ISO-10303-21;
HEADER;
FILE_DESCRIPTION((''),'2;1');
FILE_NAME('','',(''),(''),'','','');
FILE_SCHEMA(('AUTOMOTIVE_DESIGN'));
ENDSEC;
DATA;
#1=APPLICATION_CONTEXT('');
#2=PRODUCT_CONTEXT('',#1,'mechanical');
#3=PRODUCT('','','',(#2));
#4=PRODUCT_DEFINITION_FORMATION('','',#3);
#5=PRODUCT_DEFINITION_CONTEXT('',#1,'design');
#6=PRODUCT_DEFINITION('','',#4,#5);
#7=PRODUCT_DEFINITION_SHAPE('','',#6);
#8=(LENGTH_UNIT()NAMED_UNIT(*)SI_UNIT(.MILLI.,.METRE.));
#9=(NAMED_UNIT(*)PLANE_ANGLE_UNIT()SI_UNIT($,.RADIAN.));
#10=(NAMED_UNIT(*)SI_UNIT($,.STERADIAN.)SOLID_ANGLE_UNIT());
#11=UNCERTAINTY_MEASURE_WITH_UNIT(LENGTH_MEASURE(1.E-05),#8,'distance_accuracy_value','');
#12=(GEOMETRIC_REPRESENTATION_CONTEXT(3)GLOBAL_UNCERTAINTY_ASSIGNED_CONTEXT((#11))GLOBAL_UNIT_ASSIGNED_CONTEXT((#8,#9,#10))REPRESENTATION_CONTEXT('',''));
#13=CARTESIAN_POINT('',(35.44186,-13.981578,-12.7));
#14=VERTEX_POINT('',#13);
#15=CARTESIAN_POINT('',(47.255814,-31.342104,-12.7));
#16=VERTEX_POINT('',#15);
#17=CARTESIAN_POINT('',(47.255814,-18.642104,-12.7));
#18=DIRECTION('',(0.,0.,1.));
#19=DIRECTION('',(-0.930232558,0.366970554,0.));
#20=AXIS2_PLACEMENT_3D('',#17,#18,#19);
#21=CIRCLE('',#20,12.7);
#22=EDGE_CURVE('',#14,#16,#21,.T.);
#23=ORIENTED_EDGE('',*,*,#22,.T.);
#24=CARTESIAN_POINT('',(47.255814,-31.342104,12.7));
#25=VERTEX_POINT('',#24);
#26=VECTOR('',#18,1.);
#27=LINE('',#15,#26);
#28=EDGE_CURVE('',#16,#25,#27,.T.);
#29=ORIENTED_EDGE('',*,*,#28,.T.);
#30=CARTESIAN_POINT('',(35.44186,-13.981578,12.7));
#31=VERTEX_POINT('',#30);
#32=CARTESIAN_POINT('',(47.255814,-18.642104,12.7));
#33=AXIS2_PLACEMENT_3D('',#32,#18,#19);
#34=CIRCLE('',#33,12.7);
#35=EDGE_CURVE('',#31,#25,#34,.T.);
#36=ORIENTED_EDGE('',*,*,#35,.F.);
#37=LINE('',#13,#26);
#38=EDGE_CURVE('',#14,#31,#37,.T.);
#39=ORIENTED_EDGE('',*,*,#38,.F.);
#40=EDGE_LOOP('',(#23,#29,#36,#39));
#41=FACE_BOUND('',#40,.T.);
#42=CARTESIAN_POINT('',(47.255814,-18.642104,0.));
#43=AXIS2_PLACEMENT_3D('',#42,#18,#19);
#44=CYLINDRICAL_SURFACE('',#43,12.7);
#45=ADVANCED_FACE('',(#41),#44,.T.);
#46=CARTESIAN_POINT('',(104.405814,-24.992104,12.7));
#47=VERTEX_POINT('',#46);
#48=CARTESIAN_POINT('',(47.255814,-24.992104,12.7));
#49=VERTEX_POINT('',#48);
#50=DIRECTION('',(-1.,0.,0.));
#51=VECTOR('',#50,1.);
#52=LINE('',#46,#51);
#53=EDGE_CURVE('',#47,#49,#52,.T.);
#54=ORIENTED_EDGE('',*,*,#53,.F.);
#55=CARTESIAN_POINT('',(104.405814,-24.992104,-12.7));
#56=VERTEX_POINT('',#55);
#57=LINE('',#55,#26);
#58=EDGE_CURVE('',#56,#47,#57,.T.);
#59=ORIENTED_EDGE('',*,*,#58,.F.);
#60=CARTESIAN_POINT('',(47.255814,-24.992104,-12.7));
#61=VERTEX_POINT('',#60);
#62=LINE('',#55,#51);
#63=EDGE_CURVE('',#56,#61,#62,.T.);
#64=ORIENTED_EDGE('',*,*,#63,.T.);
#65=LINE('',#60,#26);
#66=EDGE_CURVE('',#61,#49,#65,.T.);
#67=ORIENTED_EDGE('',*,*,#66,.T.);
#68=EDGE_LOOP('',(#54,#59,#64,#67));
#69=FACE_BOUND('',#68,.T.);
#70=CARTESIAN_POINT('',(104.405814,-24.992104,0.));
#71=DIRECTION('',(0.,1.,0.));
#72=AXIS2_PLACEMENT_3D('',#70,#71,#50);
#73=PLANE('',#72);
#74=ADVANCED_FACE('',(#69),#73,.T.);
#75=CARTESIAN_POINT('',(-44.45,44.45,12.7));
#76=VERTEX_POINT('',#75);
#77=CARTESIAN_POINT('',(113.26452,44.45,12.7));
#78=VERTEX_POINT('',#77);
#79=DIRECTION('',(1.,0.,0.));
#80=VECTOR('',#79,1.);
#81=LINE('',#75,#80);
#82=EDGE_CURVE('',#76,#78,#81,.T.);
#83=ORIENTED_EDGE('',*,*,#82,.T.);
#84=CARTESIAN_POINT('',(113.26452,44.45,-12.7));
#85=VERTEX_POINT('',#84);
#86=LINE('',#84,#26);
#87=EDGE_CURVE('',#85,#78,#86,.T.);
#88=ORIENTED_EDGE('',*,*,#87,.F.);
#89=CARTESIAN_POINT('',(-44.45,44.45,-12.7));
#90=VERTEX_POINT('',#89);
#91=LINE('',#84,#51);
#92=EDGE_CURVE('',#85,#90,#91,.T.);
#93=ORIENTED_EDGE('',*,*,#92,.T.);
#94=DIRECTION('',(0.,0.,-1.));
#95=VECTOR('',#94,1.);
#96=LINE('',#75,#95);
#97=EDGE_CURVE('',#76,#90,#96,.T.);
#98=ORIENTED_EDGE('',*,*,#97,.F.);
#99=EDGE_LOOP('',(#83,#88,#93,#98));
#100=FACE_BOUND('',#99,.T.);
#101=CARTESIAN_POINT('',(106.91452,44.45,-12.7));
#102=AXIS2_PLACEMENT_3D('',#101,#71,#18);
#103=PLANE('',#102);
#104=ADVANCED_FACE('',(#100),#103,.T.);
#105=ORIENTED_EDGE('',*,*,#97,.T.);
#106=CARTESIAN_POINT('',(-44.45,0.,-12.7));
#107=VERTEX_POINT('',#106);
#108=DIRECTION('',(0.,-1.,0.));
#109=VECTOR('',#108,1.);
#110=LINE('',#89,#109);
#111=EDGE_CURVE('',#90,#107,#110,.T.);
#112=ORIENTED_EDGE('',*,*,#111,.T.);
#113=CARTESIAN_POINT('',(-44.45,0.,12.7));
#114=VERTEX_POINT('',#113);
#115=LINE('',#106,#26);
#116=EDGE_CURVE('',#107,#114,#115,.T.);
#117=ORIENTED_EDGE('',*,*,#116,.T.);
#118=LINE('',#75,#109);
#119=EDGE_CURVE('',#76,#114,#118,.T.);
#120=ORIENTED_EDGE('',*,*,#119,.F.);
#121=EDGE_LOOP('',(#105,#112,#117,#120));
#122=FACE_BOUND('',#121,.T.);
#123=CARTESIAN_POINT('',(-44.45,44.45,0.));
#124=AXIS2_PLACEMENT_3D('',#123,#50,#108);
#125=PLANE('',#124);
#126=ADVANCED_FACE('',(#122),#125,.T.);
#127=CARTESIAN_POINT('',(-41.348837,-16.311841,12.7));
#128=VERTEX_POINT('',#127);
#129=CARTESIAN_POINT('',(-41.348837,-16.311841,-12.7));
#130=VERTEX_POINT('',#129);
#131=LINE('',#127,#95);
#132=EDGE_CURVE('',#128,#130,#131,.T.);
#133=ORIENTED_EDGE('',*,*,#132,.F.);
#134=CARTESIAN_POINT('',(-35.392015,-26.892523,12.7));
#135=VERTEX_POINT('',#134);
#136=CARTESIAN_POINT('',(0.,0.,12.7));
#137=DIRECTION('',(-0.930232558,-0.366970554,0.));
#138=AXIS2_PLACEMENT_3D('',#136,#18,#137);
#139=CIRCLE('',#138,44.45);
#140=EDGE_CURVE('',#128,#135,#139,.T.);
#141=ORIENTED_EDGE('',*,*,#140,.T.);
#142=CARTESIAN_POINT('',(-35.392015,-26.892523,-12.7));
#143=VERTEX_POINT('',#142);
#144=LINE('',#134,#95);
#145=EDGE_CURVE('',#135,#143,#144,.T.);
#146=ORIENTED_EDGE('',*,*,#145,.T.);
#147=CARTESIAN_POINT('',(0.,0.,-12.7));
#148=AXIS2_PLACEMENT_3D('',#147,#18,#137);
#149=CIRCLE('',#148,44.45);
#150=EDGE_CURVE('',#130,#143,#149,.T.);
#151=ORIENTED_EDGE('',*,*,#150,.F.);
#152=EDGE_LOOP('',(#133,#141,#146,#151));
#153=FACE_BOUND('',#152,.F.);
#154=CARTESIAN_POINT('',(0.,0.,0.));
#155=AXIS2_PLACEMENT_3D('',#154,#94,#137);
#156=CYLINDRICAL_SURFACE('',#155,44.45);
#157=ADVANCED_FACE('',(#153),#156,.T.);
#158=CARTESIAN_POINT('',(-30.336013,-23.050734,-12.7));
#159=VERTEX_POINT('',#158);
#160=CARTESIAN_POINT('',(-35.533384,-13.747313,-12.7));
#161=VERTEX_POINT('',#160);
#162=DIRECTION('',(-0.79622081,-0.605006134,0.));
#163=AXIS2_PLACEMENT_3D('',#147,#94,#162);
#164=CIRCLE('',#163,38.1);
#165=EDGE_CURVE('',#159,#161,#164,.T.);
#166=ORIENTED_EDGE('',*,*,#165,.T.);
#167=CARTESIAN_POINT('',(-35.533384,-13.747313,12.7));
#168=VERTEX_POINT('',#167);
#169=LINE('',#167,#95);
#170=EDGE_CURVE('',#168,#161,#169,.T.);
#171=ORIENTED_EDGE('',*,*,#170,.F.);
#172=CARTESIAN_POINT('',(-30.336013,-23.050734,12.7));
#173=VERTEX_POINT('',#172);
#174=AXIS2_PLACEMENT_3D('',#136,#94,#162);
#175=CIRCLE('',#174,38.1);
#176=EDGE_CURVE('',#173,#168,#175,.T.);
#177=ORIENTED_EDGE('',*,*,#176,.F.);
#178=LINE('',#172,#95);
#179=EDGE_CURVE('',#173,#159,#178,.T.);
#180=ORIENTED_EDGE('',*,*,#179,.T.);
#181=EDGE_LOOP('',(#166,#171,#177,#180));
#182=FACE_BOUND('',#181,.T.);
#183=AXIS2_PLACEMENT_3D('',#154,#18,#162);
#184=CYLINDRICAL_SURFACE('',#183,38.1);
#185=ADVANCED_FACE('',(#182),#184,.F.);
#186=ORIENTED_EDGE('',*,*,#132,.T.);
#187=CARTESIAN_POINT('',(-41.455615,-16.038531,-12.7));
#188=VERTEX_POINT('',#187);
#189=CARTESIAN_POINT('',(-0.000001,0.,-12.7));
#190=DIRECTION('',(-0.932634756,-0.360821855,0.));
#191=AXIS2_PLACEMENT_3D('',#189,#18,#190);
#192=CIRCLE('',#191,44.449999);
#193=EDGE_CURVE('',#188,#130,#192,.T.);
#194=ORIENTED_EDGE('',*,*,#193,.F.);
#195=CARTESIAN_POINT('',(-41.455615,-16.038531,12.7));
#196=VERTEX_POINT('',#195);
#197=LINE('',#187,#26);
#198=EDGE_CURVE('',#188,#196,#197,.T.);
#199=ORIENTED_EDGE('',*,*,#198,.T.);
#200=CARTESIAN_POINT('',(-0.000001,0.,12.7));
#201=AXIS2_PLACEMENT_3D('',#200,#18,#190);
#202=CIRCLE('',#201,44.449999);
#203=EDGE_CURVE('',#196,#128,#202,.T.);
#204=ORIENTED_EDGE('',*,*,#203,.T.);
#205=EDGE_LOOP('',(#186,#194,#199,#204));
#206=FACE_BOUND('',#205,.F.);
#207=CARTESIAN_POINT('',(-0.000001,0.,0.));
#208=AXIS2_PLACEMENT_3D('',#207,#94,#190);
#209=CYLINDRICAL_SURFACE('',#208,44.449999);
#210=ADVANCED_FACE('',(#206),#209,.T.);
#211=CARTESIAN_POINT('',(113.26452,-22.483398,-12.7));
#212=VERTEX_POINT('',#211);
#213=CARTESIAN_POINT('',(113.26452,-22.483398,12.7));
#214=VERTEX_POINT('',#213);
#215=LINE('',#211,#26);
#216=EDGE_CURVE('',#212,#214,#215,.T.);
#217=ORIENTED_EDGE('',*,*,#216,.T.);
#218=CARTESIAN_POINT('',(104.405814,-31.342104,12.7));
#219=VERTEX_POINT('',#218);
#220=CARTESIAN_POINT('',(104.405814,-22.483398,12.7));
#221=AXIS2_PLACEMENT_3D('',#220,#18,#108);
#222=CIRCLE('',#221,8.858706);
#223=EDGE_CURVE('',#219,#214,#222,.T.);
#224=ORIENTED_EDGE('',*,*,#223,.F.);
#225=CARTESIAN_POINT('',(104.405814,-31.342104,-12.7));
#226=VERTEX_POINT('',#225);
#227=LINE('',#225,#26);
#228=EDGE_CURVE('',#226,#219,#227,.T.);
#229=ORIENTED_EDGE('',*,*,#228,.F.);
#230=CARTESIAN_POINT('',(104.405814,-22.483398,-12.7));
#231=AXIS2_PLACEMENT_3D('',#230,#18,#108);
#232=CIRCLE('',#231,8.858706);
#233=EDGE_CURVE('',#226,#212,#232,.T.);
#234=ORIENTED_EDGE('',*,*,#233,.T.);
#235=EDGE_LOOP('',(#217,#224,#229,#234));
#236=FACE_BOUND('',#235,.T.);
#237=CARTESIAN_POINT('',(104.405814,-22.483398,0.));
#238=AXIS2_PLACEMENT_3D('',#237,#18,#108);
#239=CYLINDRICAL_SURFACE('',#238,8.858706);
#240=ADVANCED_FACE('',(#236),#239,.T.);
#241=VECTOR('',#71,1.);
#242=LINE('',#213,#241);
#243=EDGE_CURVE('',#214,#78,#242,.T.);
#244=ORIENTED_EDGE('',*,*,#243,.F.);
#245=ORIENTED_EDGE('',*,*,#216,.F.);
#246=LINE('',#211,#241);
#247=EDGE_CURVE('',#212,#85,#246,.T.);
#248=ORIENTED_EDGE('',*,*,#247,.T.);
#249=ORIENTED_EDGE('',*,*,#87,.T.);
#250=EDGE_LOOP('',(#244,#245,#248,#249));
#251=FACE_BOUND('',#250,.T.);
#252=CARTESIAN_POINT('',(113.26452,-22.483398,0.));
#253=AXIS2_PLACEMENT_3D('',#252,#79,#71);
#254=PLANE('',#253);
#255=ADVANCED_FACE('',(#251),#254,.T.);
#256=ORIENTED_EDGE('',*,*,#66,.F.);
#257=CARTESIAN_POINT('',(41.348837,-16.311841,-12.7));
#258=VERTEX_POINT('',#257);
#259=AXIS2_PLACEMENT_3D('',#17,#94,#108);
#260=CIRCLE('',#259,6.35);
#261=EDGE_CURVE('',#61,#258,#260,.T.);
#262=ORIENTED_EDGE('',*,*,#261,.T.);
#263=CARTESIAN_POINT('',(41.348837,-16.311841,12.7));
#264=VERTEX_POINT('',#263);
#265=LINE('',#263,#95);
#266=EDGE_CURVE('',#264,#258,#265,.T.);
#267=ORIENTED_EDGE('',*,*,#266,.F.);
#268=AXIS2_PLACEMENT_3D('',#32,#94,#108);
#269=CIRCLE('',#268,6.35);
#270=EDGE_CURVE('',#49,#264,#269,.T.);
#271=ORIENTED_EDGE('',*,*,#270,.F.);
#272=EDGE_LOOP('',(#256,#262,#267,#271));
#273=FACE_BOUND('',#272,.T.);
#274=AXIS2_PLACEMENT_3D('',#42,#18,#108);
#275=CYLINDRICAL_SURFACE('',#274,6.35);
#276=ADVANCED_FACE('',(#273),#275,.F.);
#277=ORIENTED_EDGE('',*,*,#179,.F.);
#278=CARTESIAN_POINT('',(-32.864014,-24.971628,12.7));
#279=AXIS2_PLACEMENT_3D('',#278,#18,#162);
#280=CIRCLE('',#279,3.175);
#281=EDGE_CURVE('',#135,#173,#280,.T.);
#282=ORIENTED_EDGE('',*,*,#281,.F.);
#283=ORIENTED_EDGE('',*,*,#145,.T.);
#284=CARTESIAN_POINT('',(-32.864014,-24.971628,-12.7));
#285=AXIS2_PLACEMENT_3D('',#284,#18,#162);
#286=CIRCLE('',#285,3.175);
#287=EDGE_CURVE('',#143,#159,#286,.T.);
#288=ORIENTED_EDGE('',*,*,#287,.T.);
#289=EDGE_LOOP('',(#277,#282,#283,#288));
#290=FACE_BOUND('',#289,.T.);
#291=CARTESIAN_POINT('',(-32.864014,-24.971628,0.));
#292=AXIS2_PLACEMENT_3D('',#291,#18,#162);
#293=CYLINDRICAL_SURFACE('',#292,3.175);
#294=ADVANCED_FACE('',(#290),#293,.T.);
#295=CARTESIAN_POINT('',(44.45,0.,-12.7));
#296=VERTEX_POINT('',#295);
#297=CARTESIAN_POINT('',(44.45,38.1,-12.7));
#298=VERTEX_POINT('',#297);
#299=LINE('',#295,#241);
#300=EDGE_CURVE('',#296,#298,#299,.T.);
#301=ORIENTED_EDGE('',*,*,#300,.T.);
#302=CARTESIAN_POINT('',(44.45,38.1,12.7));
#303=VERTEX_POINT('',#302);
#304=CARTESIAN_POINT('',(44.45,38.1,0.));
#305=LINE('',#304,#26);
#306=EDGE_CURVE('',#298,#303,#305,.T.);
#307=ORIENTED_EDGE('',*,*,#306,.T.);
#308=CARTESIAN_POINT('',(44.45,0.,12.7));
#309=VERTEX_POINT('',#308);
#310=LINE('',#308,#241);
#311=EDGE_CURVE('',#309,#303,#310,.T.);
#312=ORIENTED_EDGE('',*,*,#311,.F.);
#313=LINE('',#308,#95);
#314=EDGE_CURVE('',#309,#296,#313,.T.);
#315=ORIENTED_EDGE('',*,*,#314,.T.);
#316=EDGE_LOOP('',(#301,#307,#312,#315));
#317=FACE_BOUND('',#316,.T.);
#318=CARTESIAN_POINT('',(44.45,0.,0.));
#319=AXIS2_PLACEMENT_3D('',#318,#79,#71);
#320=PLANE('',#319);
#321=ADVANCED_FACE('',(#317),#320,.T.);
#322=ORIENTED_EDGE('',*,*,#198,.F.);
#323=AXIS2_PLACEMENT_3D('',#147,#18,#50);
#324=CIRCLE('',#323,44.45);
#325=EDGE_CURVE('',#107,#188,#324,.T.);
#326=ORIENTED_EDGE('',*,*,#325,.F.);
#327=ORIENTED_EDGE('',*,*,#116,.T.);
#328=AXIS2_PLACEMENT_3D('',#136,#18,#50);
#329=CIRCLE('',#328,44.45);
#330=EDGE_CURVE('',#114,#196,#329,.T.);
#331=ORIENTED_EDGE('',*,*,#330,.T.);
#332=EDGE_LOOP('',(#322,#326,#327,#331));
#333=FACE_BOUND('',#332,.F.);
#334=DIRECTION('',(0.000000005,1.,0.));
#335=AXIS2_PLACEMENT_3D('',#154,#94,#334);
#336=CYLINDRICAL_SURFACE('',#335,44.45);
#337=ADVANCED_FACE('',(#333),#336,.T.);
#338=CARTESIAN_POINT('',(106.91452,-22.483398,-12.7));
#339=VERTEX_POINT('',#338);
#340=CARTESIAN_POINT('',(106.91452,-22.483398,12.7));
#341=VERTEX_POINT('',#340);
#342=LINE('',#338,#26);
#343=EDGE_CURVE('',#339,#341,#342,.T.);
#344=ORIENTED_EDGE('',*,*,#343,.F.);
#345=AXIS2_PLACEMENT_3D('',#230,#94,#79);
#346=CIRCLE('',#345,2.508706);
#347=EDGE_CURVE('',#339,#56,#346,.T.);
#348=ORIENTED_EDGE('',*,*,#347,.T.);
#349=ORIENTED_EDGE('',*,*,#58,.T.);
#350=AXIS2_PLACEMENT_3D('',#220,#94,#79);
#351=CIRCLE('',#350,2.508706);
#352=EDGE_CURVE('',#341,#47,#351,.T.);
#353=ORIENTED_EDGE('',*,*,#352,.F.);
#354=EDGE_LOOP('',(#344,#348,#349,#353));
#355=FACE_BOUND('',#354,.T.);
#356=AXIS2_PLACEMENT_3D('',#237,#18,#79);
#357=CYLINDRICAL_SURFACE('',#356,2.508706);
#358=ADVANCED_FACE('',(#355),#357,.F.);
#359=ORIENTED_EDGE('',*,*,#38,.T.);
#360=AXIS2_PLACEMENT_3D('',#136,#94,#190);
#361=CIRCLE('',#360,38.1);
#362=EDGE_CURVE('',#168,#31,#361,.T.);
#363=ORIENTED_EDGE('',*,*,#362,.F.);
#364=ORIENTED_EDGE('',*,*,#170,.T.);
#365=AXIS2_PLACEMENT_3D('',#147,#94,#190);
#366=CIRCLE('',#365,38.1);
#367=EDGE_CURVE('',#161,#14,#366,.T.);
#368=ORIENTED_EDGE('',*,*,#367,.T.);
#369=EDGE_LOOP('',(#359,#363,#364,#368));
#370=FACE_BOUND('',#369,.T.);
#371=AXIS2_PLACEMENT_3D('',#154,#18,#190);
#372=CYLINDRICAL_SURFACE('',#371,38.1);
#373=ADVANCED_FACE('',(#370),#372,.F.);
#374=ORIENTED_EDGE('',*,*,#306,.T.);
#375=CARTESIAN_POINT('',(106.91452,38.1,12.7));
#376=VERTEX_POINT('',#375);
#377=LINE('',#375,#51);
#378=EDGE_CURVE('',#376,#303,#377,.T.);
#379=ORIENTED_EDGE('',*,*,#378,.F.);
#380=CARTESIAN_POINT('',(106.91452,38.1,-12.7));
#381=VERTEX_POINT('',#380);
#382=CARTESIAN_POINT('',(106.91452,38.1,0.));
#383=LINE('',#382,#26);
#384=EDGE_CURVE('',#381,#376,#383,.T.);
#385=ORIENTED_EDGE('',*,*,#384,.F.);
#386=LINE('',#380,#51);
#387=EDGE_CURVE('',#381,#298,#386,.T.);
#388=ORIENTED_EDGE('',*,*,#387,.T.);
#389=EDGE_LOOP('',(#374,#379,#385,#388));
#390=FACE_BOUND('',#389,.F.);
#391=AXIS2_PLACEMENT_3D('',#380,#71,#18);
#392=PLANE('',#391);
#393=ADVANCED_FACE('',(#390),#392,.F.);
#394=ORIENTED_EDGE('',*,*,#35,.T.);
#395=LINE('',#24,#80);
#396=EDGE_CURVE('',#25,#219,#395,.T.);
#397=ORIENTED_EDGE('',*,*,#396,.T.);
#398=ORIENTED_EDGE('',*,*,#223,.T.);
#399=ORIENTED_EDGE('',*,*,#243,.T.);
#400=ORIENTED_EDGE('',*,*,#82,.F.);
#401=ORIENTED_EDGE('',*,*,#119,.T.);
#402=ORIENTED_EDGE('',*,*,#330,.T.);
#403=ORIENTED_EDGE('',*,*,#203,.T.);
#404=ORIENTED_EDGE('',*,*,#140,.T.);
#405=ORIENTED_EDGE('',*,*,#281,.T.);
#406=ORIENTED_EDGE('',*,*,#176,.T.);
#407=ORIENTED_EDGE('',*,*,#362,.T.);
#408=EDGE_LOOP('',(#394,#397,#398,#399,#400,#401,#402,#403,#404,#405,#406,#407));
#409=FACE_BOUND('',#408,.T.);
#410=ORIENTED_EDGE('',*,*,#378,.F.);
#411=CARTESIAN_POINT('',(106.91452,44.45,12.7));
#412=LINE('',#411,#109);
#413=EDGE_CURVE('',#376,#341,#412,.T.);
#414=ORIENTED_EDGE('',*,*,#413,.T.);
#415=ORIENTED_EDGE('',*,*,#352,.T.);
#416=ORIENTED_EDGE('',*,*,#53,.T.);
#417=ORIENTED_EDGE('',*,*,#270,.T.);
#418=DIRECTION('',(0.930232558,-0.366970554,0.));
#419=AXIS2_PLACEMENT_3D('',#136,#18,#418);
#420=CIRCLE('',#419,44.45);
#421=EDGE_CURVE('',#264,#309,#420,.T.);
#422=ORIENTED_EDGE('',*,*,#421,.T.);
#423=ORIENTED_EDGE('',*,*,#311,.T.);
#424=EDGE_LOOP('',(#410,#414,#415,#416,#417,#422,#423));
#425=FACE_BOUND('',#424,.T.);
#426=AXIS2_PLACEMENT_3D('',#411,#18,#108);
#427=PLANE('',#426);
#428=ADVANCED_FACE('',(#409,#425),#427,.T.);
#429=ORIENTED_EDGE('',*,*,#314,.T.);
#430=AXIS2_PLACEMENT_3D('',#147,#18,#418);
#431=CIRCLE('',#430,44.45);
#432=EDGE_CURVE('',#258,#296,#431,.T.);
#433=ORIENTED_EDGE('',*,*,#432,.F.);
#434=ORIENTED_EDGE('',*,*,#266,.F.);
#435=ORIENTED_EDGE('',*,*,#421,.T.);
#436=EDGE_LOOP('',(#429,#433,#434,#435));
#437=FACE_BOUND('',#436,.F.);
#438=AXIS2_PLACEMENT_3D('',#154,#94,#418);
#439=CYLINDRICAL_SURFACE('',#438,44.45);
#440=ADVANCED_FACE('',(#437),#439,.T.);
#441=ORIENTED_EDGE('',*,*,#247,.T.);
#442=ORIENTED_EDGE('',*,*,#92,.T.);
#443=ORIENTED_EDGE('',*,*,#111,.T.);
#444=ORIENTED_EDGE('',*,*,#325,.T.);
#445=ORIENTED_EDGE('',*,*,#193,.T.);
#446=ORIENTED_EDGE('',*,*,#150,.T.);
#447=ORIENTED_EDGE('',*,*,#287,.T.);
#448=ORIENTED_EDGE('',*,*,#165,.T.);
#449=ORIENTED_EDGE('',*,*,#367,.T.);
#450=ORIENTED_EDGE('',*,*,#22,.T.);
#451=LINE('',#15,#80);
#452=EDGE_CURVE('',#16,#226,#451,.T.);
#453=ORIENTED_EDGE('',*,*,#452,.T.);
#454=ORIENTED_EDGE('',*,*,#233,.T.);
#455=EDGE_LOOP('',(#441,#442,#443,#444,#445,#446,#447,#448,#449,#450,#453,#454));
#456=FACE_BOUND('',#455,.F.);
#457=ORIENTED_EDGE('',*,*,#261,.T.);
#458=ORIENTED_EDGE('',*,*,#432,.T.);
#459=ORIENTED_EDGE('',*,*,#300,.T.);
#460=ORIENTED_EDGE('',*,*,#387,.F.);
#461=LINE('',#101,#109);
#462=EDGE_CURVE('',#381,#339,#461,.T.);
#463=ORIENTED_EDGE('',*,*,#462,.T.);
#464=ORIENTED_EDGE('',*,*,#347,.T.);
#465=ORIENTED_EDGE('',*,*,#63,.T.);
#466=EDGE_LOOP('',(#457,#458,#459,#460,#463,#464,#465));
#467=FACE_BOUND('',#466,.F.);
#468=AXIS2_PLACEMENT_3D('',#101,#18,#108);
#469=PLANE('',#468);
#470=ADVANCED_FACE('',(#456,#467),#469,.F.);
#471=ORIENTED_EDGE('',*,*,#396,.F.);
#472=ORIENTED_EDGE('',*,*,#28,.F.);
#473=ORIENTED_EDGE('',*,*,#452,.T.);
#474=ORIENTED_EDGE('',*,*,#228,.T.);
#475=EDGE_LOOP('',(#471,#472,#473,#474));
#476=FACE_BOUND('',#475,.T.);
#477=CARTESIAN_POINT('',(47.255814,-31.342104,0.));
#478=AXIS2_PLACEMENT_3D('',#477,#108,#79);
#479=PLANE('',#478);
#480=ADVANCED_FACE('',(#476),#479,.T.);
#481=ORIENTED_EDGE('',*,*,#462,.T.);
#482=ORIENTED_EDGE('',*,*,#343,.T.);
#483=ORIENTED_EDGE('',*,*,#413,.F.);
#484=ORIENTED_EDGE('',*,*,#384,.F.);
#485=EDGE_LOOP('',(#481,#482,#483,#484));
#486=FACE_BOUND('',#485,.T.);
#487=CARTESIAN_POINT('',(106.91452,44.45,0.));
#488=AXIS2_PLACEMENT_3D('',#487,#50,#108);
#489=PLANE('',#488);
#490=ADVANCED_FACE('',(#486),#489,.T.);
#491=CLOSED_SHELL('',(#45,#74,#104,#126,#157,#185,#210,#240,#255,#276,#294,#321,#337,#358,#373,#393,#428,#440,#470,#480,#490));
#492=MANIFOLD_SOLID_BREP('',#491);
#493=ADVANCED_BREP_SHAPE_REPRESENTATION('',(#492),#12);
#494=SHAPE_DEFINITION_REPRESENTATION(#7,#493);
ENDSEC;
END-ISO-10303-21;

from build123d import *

# Parameters (mm, degrees)
F1_DEPTH = 12.7
F2_DEPTH = 12.7
F3_DEPTH = 12.7
F4_W     = 6.35
F4_H     = 25.4
F5_DEPTH = 62.464519896


# Not quite as in the source:
# - a feature names something its author has since deleted; it is built from what else it names


with BuildPart() as f1:
    # F0 (on Top) → F1 (new body, symmetric)
    with BuildSketch(Plane.XY):
        with BuildLine():
            ThreePointArc((-35.5333842184, -13.7473126824), (0.1257546156, 38.0997924637), (35.4418604651, -13.9815781216))
            ThreePointArc((35.4418604651, -13.9815781216), (36.7563215678, -25.7870785948), (47.2558139535, -31.3421041622))
            Line((47.2558139535, -31.3421041622), (104.4058139535, -31.3421041622))
            ThreePointArc((104.4058139535, -31.3421041622), (110.669864998, -28.7474492641), (113.264519896, -22.4833982196))
            Line((113.264519896, -22.4833982196), (113.264519896, 44.45))
            Line((113.264519896, 44.45), (106.914519896, 44.45))
            Line((106.914519896, 44.45), (106.914519896, -22.4833982196))
            ThreePointArc((106.914519896, -22.4833982196), (106.1797369375, -24.2573212036), (104.4058139535, -24.9921041622))
            Line((104.4058139535, -24.9921041622), (47.2558139535, -24.9921041622))
            ThreePointArc((47.2558139535, -24.9921041622), (42.0060677606, -22.2145913785), (41.3488372093, -16.3118411419))
            ThreePointArc((41.3488372093, -16.3118411419), (43.6678274818, -8.3020083729), (44.45, 0))
            ThreePointArc((44.45, 0), (31.4308965011, 31.4308963464), (2.188e-07, 44.45))
            ThreePointArc((2.188e-07, 44.45), (-31.4308963464, 31.4308965011), (-44.45, 0))
            ThreePointArc((-44.45, 0), (-43.6949916081, -8.157831107), (-41.4556149214, -16.0385314629))
            ThreePointArc((-41.4556149214, -16.0385314629), (-41.4024515906, -16.1752744115), (-41.3488372093, -16.3118411419))
            ThreePointArc((-41.3488372093, -16.3118411419), (-38.7334132864, -21.806540193), (-35.3920150029, -26.8925226418))
            ThreePointArc((-35.3920150029, -26.8925226418), (-30.9431194568, -27.499629239), (-30.3360128596, -23.0507336929))
            ThreePointArc((-30.3360128596, -23.0507336929), (-33.2615811181, -18.581636675), (-35.5333842184, -13.7473126825))
        make_face()
    extrude(amount=F1_DEPTH, both=True)

    # F0 (on Top) → F2 (join, symmetric)
    with BuildSketch(Plane.XY):
        with BuildLine():
            Line((44.45, 0), (44.45, 44.45))
            Line((44.45, 44.45), (2.188e-07, 44.45))
            ThreePointArc((2.188e-07, 44.45), (31.4308965011, 31.4308963464), (44.45, 0))
        make_face()
    extrude(amount=F2_DEPTH, both=True)

    # F0 (on Top) → F3 (join, symmetric)
    with BuildSketch(Plane.XY):
        with BuildLine():
            Line((-44.45, 44.45), (-44.45, 0))
            ThreePointArc((-44.45, 0), (-31.4308963464, 31.4308965011), (2.188e-07, 44.45))
            Line((2.188e-07, 44.45), (-44.45, 44.45))
        make_face()
    extrude(amount=F3_DEPTH, both=True)

    # F4 (on face) → F5 (join, through all)
    with BuildSketch(Plane(origin=(106.914519896, 0, 0), x_dir=(0, -1, 0), z_dir=(-1, 0, 0))):
        with Locations((-41.275, 0)):
            Rectangle(F4_W, F4_H)
    extrude(amount=F5_DEPTH)


solid = f1.part
